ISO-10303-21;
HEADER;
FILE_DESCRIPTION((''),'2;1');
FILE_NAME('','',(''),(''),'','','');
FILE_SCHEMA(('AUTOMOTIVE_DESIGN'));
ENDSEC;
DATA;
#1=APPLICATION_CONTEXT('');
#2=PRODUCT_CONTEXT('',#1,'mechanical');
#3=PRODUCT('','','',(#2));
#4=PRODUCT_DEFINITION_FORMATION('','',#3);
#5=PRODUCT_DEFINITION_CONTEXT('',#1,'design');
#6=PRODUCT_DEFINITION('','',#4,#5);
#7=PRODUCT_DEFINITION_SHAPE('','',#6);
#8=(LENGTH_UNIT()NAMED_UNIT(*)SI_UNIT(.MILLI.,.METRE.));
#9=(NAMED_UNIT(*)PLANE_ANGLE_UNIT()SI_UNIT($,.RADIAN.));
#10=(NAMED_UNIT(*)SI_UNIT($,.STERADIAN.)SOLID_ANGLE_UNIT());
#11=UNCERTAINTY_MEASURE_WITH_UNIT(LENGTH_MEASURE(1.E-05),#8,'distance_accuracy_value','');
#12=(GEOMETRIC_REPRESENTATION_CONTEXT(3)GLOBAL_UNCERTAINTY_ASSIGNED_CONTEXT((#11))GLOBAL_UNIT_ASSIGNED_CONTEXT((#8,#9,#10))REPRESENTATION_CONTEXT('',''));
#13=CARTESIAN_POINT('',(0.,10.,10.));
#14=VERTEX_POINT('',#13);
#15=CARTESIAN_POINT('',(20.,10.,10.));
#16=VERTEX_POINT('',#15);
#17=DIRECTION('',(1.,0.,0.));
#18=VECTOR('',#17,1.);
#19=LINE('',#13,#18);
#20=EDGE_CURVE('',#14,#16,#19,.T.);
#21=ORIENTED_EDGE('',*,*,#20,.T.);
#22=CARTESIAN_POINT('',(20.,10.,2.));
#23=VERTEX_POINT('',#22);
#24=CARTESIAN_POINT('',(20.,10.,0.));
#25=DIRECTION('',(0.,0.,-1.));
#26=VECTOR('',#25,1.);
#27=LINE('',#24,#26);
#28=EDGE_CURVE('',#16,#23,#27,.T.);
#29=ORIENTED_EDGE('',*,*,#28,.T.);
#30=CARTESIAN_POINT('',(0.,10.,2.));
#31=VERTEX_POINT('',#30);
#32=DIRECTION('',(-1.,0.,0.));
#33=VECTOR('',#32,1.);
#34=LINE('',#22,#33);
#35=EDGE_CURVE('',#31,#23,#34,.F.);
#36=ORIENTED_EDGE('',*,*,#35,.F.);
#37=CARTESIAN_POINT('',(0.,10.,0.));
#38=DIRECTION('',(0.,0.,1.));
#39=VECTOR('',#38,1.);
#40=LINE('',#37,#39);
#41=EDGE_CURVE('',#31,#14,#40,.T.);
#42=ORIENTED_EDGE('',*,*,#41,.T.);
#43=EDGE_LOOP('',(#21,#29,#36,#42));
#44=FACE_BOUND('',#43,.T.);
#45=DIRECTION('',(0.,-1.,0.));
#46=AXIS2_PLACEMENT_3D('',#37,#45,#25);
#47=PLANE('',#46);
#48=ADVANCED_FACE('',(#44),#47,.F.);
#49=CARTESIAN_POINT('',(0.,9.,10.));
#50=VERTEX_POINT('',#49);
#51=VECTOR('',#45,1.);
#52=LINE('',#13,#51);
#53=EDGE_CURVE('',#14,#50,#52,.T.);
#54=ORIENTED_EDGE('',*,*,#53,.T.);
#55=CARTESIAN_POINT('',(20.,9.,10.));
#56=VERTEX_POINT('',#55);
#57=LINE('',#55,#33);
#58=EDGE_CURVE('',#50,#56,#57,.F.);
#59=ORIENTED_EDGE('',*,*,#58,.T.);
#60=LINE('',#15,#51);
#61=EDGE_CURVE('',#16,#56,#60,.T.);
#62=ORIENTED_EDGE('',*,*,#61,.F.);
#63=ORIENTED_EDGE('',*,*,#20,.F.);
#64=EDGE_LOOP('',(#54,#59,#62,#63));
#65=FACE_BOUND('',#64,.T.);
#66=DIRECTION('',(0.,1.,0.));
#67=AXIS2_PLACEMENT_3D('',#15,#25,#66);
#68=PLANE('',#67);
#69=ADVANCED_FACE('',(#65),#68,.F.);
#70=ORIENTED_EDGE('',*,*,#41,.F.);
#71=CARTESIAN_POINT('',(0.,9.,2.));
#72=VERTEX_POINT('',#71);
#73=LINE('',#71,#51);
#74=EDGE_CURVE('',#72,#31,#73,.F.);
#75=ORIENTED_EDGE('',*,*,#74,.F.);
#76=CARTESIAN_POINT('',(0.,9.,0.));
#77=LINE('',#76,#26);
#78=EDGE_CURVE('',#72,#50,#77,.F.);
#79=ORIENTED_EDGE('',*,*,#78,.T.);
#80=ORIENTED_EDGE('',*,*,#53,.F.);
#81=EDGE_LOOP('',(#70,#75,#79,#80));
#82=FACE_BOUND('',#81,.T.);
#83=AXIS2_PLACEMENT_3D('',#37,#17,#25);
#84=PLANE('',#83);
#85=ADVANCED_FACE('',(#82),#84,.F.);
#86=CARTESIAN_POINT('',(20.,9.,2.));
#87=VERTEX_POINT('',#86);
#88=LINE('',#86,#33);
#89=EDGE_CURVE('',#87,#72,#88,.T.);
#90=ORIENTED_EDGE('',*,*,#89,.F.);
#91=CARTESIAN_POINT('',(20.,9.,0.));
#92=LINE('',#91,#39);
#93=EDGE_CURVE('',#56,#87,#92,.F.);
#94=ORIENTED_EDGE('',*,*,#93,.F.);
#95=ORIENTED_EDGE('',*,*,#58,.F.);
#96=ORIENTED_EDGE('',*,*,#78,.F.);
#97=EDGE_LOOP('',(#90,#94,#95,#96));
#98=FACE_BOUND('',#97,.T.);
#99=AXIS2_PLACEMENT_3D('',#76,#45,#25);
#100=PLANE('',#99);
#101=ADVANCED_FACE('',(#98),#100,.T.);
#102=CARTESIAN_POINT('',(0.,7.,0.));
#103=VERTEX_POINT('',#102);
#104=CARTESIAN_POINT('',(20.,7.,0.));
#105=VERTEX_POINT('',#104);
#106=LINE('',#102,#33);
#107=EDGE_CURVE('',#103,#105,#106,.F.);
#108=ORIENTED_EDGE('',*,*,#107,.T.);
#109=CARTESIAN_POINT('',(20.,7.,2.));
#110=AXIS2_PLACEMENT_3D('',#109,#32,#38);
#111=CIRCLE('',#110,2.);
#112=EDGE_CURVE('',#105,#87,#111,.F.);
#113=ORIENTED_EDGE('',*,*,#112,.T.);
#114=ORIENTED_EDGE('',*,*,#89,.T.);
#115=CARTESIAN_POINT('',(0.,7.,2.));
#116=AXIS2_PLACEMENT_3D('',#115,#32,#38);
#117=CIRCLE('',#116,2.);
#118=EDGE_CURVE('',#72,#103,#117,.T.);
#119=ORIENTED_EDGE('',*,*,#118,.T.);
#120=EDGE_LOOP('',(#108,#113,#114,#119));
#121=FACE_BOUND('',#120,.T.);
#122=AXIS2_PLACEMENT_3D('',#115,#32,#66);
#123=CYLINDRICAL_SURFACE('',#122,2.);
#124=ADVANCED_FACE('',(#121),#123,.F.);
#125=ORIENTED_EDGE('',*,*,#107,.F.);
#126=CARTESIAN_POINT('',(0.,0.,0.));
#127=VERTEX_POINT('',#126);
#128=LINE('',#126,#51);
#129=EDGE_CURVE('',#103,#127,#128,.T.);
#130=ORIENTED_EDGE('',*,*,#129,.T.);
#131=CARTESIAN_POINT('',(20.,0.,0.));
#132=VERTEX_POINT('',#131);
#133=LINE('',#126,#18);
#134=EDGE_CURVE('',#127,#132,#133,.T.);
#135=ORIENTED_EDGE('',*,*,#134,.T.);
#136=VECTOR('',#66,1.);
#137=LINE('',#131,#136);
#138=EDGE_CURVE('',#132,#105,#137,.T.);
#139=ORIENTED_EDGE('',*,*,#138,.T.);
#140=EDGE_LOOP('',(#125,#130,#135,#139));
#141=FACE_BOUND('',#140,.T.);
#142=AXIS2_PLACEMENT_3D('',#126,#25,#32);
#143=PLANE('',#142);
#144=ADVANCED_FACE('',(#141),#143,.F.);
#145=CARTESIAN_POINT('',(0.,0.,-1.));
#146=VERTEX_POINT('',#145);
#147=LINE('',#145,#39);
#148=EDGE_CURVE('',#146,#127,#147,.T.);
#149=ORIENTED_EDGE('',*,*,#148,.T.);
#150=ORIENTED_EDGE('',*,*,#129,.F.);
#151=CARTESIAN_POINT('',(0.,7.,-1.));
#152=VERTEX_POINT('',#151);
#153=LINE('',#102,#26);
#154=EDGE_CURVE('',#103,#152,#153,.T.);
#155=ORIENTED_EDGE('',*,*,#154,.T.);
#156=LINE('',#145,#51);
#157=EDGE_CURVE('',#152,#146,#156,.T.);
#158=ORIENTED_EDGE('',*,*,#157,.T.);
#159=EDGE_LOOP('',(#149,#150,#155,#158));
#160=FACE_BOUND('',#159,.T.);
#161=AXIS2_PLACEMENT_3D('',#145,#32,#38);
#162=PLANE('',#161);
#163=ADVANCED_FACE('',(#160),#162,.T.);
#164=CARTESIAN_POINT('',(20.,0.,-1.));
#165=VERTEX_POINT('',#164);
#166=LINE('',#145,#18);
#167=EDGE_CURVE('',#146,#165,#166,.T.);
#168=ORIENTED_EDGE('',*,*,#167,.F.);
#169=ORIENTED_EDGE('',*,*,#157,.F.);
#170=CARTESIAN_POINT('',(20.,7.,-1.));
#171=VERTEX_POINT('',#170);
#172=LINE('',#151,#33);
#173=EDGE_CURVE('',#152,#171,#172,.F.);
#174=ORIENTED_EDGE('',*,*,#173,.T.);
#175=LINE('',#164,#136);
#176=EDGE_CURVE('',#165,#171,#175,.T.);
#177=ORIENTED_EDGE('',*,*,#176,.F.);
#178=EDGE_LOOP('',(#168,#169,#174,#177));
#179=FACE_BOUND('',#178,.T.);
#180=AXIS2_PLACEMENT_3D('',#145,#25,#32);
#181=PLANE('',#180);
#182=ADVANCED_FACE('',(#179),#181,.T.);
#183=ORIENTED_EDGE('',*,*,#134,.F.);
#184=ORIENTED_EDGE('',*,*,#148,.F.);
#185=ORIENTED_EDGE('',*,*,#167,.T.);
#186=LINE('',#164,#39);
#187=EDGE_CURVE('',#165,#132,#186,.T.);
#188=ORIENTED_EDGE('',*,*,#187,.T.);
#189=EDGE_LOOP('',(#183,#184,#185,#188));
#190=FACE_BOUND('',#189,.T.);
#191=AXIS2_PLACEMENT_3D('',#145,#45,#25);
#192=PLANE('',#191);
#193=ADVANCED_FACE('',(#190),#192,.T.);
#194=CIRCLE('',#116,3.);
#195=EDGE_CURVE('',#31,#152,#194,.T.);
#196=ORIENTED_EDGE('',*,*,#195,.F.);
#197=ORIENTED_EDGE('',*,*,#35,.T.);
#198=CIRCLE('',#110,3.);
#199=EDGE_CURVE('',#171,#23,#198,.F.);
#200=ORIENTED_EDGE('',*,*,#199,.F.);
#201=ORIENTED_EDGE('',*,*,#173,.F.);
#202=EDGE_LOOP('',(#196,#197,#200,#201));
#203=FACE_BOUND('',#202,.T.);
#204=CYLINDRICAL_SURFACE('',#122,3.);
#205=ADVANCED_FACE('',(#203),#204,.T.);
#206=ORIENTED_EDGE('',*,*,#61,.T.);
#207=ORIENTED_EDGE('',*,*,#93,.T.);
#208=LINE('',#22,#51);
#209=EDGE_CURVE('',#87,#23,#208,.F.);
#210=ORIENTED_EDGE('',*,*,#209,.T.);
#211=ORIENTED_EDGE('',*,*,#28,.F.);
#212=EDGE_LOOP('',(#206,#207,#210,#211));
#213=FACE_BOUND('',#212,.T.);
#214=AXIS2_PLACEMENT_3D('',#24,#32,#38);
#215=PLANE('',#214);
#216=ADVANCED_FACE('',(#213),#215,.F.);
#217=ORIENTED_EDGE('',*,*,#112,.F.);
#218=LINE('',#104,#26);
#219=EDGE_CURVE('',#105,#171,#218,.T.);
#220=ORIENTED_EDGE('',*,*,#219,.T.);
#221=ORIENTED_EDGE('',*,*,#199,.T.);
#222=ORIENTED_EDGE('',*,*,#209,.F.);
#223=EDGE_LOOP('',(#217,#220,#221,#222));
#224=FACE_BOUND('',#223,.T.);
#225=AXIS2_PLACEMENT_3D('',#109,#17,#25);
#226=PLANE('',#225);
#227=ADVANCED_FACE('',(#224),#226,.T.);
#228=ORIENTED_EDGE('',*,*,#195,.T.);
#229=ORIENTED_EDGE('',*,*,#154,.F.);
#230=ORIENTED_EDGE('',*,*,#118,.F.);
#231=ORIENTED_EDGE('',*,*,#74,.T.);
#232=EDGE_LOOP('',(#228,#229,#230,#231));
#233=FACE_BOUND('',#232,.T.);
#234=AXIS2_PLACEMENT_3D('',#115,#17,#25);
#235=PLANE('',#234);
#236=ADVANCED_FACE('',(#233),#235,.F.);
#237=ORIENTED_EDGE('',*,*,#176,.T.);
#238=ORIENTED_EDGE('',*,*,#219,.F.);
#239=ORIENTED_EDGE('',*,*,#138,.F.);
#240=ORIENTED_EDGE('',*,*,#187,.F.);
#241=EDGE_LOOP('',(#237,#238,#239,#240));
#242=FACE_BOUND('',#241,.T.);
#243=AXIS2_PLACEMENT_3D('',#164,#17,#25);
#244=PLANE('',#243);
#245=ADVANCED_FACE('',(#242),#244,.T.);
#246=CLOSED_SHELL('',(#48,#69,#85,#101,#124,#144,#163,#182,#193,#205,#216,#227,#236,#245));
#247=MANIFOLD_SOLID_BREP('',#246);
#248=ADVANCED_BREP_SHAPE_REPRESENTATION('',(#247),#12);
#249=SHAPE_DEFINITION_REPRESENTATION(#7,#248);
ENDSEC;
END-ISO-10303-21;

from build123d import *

# Parameters (mm, degrees)
SKETCH_1_W                 = 20
SKETCH_1_H                 = 10
BASEPLATE_DEPTH            = 1
EDGEFLANGE_STRIP_W         = 8
EDGEFLANGE_STRIP_H         = 1
EDGEFLANGE_STRIP_CUT_DEPTH = 20
EDGEFLANGE_DEPTH           = 20
EDGEFLANGE_FLAT_DEPTH      = 1


# Sheet-metal steps are written as plain solids
with BuildPart() as part:
    # Sketch 1 → BasePlate (new body)
    with BuildSketch(Plane.XY):
        with Locations((10, 5)):
            Rectangle(SKETCH_1_W, SKETCH_1_H)
    extrude(amount=-BASEPLATE_DEPTH)

    # EdgeFlange strip (across the edge) → EdgeFlange strip cut (cut)
    with BuildSketch(Plane(origin=(20, 10, 0), x_dir=(0, -1, 0), z_dir=(-1, 0, 0))):
        with Locations((-1, -0.5)):
            Rectangle(EDGEFLANGE_STRIP_W, EDGEFLANGE_STRIP_H)
    extrude(amount=EDGEFLANGE_STRIP_CUT_DEPTH, mode=Mode.SUBTRACT)

    # EdgeFlange bend section (across the edge) → EdgeFlange (add)
    with BuildSketch(Plane(origin=(20, 10, 0), x_dir=(0, -1, 0), z_dir=(-1, 0, 0))):
        with BuildLine():
            Line((0, 2), (1, 2))
            ThreePointArc((1, 2), (1.585786438, 0.585786438), (3, 0))
            Line((3, 0), (3, -1))
            ThreePointArc((3, -1), (0.878679656, -0.121320344), (0, 2))
        make_face()
    extrude(amount=EDGEFLANGE_DEPTH)

    # EdgeFlange profile (on flange) → EdgeFlange flat (add)
    with BuildSketch(Plane(origin=(0, 10, 0), x_dir=(-1, 0, 0), z_dir=(0, 1, 0))):
        Polygon((-20, 10), (-20, 2), (0, 2), (0, 10), (-2, 10), (-18, 10), align=None)
    extrude(amount=-EDGEFLANGE_FLAT_DEPTH)


solid = part.part
